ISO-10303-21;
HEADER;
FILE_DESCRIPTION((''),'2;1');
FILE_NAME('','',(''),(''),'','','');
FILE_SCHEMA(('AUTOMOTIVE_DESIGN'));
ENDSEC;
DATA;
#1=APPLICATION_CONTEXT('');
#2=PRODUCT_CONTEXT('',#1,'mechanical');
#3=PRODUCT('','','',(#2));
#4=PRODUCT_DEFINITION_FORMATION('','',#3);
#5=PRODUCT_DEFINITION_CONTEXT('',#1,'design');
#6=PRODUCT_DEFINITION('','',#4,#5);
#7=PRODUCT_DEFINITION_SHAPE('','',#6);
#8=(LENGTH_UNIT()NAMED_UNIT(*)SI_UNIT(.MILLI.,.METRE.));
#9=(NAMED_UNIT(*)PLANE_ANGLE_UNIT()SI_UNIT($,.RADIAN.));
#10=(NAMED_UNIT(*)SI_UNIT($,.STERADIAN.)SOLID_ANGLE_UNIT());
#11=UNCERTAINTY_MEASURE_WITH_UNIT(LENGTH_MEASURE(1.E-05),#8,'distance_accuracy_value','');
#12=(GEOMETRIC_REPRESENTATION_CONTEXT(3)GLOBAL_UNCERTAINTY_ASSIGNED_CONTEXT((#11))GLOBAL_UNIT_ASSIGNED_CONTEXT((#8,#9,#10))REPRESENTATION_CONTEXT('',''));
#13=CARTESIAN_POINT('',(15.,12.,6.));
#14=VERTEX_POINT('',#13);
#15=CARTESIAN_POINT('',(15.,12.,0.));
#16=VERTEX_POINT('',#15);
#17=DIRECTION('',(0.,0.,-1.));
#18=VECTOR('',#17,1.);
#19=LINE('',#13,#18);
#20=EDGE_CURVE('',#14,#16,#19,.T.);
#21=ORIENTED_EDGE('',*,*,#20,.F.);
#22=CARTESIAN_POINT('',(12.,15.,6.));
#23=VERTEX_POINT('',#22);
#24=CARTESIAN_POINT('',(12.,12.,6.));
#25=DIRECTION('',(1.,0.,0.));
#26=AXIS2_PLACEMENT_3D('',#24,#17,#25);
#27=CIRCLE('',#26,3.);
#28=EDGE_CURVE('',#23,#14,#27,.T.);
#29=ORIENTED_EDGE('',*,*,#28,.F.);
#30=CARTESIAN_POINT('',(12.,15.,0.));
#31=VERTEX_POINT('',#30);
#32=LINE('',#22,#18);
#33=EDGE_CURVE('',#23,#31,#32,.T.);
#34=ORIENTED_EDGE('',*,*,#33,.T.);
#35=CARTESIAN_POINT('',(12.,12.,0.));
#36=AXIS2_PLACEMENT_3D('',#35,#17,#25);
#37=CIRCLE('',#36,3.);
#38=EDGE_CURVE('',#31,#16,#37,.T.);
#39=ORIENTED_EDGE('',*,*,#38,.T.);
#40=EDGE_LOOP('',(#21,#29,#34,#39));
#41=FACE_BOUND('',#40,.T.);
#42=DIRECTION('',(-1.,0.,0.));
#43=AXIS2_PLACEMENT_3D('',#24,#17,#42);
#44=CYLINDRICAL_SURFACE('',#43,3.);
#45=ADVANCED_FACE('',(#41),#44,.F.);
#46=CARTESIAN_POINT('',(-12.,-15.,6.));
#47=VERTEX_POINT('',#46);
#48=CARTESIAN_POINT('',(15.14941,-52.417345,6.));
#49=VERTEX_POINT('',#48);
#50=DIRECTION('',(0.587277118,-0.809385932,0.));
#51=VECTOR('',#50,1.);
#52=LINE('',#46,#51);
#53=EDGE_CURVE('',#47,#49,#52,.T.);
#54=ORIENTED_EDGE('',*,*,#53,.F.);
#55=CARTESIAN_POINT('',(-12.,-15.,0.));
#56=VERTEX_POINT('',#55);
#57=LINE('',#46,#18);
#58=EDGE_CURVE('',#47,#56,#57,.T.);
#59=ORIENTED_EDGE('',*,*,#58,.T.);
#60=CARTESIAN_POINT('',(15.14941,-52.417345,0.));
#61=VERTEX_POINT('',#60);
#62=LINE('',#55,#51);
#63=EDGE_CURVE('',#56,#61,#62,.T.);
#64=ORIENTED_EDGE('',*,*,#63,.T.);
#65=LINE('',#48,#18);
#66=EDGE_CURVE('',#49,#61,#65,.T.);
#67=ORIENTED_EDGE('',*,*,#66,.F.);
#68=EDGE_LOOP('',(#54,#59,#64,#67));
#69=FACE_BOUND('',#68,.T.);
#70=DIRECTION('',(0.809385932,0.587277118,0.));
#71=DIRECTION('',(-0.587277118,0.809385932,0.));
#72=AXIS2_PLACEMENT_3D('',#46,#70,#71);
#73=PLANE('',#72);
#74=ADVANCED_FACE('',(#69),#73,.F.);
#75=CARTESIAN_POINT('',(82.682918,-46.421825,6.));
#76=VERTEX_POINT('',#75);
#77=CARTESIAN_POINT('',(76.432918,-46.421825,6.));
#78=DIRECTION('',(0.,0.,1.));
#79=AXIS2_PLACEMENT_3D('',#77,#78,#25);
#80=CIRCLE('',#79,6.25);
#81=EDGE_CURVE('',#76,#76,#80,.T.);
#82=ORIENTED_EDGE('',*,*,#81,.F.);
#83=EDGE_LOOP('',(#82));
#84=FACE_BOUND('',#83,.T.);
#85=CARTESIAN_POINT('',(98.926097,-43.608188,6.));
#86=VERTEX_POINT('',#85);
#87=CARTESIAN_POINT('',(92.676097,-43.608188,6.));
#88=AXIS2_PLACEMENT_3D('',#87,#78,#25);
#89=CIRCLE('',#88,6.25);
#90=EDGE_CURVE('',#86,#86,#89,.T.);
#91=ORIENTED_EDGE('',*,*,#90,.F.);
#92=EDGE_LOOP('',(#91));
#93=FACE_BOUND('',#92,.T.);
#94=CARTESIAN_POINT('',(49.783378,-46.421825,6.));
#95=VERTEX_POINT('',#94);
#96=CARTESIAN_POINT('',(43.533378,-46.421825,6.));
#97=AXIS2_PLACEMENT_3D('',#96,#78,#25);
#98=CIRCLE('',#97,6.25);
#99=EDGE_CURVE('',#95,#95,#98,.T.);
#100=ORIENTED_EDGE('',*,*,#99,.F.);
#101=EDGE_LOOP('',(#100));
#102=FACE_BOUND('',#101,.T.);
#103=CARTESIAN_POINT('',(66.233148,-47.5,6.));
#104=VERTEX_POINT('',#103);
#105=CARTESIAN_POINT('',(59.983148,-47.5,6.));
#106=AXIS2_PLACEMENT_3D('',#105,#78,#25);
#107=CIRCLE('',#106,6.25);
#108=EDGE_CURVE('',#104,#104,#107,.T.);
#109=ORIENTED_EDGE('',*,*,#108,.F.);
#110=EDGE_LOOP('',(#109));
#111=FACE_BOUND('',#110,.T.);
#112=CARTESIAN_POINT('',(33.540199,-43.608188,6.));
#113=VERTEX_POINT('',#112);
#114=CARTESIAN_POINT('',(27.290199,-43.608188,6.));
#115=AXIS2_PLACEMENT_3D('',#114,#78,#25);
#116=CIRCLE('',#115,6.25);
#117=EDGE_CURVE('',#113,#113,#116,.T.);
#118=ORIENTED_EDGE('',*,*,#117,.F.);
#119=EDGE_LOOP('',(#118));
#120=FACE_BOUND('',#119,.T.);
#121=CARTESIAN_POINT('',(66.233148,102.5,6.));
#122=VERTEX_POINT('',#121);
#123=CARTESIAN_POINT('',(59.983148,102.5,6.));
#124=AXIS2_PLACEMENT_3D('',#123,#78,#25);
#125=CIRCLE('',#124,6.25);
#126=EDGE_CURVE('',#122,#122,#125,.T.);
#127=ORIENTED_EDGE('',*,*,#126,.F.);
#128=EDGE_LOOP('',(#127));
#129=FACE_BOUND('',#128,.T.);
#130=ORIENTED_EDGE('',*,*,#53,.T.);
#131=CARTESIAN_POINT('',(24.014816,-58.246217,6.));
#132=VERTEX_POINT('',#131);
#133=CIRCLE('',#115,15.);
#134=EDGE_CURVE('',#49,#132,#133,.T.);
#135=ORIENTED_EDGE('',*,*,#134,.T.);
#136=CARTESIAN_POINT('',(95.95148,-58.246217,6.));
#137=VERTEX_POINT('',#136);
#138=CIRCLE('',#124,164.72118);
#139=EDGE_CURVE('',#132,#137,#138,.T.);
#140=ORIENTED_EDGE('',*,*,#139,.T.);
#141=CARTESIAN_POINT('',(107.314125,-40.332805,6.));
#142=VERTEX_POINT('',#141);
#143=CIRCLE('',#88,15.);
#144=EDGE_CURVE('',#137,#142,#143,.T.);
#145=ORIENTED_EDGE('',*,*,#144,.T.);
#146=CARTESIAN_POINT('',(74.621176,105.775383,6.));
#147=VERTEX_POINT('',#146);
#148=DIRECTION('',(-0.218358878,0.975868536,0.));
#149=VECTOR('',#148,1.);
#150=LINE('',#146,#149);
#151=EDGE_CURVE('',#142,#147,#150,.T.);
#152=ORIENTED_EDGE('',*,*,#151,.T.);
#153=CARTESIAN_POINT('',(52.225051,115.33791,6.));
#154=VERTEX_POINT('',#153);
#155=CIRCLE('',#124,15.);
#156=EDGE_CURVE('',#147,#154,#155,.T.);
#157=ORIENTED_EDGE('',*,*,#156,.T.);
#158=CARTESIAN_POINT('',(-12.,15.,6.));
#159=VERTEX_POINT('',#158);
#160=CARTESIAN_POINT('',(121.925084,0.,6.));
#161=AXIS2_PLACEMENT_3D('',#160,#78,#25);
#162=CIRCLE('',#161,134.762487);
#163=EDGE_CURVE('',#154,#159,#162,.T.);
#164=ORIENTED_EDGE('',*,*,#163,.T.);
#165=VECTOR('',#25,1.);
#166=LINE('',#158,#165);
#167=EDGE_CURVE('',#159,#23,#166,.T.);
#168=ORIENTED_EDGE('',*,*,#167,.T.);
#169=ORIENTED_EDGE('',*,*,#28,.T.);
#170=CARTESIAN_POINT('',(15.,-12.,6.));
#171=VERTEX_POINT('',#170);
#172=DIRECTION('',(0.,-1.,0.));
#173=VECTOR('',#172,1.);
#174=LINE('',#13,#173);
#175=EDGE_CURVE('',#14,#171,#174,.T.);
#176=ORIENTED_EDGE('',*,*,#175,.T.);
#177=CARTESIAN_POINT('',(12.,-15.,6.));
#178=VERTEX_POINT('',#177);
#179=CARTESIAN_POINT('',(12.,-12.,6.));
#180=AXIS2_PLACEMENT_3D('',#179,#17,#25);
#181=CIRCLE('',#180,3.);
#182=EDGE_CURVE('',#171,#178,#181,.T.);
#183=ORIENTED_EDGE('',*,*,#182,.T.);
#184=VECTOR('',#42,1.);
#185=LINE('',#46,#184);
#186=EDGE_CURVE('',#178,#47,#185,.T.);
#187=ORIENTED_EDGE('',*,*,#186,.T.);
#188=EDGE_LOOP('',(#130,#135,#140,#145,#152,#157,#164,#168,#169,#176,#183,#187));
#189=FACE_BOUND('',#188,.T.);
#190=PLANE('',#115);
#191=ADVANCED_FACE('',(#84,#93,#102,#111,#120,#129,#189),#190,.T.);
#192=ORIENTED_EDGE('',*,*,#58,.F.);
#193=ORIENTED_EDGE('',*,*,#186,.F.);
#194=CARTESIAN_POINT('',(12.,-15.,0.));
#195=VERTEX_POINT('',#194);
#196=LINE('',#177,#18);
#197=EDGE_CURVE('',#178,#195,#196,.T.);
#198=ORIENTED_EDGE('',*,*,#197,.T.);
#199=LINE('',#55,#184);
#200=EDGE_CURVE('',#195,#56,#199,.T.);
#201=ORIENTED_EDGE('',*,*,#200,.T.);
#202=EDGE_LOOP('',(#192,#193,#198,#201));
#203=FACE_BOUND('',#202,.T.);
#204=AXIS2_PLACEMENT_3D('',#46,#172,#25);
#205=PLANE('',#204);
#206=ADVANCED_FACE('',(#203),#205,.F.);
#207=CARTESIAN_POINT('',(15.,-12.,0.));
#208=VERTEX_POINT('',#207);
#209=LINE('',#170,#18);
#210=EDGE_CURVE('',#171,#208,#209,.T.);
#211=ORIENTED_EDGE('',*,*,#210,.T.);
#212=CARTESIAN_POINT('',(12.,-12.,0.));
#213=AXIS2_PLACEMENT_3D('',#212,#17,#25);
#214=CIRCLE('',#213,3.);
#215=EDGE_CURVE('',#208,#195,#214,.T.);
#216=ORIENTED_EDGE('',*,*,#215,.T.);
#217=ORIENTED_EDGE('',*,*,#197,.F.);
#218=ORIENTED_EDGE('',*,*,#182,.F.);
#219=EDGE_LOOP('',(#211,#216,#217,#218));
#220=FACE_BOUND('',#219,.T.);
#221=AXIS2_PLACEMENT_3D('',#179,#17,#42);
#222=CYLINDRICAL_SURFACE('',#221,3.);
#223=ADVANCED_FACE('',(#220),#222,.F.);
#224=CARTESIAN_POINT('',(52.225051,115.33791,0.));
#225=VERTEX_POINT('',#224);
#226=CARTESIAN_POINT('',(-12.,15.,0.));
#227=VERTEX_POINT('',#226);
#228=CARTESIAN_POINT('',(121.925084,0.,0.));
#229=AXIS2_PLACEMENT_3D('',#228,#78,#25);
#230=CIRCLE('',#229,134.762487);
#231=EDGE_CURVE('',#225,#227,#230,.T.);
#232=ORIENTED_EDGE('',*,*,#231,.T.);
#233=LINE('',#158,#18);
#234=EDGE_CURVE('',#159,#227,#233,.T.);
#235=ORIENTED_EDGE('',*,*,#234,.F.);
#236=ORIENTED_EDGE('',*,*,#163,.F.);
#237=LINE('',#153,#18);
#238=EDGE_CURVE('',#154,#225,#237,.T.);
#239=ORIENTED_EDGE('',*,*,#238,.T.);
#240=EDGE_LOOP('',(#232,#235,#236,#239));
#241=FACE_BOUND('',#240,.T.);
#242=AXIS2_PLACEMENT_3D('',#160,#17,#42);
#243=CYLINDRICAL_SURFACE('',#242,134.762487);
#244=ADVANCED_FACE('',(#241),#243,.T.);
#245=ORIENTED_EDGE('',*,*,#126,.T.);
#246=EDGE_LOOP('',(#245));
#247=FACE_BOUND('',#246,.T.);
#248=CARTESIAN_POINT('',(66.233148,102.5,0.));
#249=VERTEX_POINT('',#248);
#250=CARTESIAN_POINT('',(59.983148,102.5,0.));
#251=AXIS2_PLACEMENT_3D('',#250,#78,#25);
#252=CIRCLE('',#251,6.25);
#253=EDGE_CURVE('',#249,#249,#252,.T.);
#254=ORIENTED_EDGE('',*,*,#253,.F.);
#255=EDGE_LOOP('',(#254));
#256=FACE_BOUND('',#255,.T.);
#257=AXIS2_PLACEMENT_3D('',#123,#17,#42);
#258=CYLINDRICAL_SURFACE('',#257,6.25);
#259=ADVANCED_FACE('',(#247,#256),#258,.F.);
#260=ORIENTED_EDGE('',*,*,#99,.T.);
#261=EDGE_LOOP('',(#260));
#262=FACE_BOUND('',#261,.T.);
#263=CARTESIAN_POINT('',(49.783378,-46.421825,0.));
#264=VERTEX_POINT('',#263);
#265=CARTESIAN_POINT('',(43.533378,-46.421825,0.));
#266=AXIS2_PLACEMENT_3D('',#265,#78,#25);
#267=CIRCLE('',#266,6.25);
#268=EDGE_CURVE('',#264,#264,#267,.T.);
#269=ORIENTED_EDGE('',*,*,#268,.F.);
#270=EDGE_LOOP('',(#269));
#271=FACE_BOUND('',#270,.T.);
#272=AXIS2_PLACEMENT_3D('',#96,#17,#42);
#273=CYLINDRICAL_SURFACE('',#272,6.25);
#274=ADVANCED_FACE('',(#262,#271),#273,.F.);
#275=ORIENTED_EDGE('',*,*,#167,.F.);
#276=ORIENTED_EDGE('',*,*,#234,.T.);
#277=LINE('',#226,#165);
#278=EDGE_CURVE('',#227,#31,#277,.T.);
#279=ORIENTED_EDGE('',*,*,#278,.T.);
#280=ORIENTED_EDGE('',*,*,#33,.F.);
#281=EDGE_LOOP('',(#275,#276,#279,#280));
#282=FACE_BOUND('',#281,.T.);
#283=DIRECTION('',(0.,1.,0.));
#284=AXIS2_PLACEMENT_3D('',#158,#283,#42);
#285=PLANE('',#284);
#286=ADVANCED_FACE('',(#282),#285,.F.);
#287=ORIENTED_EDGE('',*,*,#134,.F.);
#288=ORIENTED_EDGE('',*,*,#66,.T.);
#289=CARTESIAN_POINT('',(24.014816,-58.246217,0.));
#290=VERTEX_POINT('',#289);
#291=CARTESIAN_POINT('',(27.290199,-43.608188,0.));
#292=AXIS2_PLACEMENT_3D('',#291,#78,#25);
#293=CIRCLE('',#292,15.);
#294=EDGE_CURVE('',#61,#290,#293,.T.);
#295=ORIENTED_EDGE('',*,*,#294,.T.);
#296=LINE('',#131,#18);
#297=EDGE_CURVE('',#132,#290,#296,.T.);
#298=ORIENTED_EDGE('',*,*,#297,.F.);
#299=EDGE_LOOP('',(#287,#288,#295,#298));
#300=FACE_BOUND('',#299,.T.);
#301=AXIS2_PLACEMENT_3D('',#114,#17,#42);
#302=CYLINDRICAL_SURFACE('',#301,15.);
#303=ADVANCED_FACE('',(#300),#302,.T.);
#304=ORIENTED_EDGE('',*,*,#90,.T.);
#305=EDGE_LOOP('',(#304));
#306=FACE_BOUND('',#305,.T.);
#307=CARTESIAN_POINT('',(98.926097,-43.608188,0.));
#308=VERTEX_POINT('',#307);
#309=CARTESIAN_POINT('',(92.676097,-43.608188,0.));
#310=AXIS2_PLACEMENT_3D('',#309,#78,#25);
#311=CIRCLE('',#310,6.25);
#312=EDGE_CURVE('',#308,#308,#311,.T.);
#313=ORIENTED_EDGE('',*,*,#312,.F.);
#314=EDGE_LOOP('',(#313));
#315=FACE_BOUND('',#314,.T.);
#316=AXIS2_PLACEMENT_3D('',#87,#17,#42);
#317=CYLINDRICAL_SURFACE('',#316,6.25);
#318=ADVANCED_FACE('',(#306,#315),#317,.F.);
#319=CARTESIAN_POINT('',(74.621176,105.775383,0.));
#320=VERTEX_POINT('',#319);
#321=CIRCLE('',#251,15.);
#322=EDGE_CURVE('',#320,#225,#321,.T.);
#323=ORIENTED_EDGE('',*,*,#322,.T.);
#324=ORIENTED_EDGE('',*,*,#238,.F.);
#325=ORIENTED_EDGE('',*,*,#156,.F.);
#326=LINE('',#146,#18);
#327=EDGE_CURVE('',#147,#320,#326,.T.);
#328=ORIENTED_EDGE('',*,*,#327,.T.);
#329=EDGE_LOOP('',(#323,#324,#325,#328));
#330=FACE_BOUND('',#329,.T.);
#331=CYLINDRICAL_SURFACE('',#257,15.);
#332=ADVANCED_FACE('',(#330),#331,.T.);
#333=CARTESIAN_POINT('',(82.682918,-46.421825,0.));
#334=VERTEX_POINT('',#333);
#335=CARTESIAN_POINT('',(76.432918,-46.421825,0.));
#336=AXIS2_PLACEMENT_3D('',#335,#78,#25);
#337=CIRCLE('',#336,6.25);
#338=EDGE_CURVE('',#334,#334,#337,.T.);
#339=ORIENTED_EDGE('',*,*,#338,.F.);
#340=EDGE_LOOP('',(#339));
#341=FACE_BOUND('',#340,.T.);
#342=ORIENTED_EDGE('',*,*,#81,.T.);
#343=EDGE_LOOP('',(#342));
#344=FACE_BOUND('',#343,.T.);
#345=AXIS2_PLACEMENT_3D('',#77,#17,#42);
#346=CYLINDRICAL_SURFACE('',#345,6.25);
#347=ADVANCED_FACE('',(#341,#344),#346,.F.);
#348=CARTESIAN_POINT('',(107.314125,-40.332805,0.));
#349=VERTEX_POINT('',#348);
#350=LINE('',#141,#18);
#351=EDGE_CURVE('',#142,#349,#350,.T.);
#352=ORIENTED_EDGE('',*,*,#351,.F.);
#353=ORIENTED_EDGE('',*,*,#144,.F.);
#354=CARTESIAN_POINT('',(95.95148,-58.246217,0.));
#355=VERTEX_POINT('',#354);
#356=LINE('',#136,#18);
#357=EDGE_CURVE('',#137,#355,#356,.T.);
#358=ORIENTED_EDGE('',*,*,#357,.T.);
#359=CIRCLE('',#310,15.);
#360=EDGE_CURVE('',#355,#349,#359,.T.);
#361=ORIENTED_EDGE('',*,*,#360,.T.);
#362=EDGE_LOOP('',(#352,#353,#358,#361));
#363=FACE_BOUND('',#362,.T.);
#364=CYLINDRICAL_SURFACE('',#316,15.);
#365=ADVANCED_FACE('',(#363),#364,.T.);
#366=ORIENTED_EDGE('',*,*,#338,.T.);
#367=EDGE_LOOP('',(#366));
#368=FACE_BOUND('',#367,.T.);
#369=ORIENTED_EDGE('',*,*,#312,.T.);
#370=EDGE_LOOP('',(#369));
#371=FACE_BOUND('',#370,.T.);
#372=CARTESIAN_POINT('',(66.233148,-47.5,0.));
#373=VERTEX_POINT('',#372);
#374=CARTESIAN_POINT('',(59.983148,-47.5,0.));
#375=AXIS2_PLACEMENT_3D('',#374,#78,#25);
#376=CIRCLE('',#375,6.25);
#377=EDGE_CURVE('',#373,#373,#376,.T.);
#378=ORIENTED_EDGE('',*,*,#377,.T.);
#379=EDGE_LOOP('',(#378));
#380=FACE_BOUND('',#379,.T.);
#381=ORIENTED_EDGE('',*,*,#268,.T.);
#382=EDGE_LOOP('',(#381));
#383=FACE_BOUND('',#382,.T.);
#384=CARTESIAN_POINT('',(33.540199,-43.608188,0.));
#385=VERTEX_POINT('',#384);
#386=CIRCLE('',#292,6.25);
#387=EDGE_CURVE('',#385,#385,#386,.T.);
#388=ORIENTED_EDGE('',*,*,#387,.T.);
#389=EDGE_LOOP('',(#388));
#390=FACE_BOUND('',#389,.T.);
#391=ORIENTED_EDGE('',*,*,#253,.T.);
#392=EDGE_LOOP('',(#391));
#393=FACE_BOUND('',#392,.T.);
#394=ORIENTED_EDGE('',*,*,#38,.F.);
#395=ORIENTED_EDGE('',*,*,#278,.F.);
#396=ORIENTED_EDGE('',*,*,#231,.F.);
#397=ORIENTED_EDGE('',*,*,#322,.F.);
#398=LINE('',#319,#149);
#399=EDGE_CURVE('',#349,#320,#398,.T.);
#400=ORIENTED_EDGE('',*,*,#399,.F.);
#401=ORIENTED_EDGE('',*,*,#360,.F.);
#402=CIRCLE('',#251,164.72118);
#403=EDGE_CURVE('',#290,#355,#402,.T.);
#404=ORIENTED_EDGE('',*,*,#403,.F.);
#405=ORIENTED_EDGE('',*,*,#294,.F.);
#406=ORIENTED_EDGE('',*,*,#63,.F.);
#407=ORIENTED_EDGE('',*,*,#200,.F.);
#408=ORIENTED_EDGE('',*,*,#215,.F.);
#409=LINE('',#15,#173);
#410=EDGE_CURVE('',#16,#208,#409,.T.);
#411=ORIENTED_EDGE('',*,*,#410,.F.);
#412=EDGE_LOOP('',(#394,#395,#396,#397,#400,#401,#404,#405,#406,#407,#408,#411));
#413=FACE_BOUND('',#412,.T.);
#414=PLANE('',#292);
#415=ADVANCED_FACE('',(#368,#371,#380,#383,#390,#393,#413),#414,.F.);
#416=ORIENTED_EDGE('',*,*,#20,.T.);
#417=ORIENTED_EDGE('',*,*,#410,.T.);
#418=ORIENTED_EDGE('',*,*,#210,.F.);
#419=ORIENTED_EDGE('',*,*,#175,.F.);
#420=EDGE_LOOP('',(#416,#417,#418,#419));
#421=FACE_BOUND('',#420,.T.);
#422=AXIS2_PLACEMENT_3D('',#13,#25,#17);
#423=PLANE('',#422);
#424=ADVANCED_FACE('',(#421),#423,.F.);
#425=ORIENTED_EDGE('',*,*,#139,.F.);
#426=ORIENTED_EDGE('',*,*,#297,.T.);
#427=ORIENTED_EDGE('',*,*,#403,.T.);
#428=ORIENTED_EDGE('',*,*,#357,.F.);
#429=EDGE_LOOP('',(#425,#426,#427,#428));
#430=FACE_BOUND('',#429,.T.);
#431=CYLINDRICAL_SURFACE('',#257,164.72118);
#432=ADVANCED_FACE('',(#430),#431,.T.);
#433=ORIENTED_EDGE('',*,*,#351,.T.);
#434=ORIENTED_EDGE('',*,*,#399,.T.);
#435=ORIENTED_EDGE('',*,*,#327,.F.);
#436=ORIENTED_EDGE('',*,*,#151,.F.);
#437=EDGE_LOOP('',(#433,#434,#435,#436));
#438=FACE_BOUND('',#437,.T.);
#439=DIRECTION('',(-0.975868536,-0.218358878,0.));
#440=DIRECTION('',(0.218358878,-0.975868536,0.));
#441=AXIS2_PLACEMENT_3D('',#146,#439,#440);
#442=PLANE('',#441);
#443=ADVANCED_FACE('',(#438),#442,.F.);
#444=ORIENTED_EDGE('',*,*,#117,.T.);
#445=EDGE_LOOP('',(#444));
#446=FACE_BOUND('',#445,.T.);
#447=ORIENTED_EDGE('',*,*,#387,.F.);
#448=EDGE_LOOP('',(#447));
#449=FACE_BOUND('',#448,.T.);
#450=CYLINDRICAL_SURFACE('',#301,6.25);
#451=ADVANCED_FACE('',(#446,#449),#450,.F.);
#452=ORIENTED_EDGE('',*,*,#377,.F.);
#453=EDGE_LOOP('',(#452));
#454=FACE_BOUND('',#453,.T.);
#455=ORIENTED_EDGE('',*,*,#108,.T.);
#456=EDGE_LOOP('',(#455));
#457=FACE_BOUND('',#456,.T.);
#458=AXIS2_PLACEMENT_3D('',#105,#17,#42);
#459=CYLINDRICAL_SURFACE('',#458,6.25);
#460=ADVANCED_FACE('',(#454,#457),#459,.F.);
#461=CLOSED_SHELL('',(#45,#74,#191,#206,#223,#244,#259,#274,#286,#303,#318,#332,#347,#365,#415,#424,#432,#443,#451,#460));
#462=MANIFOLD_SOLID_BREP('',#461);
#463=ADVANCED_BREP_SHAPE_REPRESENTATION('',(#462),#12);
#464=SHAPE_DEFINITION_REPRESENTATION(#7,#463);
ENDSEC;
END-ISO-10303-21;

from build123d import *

# Parameters (mm, degrees)
SKETCH_1_R             = 6.25
SM_BASE_FLANGE_1_DEPTH = 6


# Sheet-metal steps are written as plain solids
with BuildPart() as part:
    # Sketch 1 → Базовая кромка1 (new body)
    with BuildSketch(Plane.XY):
        with BuildLine():
            Line((-12, -15), (12, -15))
            ThreePointArc((12, -15), (14.121320344, -14.121320344), (15, -12))
            Line((15, -12), (15, 12))
            ThreePointArc((15, 12), (14.121320344, 14.121320344), (12, 15))
            Line((12, 15), (-12, 15))
            ThreePointArc((-12, 15), (8.423008458, 72.651269477), (52.225050565, 115.337909706))
            ThreePointArc((52.225050565, 115.337909706), (65.873295621, 116.29514987), (74.621175956, 105.775383166))
            Line((74.621175956, 105.775383166), (107.314124719, -40.33280529))
            ThreePointArc((107.314124719, -40.33280529), (105.342791215, -51.642791703), (95.951479838, -58.246216503))
            ThreePointArc((95.951479838, -58.246216503), (59.983147908, -62.22117964), (24.014815979, -58.246216503))
            ThreePointArc((24.014815979, -58.246216503), (19.049536185, -56.141802219), (15.149410164, -52.417345221))
            Line((15.149410164, -52.417345221), (-12, -15))
        make_face()
        with Locations((59.983147908, 102.5)):
            Circle(SKETCH_1_R, mode=Mode.SUBTRACT)
        with Locations((27.290199146, -43.608188456)):
            Circle(SKETCH_1_R, mode=Mode.SUBTRACT)
        with Locations((43.533377705, -46.421825098)):
            Circle(SKETCH_1_R, mode=Mode.SUBTRACT)
        with Locations((59.983147908, -47.5)):
            Circle(SKETCH_1_R, mode=Mode.SUBTRACT)
        with Locations((76.432918112, -46.421825098)):
            Circle(SKETCH_1_R, mode=Mode.SUBTRACT)
        with Locations((92.676096671, -43.608188456)):
            Circle(SKETCH_1_R, mode=Mode.SUBTRACT)
    extrude(amount=SM_BASE_FLANGE_1_DEPTH)


solid = part.part
